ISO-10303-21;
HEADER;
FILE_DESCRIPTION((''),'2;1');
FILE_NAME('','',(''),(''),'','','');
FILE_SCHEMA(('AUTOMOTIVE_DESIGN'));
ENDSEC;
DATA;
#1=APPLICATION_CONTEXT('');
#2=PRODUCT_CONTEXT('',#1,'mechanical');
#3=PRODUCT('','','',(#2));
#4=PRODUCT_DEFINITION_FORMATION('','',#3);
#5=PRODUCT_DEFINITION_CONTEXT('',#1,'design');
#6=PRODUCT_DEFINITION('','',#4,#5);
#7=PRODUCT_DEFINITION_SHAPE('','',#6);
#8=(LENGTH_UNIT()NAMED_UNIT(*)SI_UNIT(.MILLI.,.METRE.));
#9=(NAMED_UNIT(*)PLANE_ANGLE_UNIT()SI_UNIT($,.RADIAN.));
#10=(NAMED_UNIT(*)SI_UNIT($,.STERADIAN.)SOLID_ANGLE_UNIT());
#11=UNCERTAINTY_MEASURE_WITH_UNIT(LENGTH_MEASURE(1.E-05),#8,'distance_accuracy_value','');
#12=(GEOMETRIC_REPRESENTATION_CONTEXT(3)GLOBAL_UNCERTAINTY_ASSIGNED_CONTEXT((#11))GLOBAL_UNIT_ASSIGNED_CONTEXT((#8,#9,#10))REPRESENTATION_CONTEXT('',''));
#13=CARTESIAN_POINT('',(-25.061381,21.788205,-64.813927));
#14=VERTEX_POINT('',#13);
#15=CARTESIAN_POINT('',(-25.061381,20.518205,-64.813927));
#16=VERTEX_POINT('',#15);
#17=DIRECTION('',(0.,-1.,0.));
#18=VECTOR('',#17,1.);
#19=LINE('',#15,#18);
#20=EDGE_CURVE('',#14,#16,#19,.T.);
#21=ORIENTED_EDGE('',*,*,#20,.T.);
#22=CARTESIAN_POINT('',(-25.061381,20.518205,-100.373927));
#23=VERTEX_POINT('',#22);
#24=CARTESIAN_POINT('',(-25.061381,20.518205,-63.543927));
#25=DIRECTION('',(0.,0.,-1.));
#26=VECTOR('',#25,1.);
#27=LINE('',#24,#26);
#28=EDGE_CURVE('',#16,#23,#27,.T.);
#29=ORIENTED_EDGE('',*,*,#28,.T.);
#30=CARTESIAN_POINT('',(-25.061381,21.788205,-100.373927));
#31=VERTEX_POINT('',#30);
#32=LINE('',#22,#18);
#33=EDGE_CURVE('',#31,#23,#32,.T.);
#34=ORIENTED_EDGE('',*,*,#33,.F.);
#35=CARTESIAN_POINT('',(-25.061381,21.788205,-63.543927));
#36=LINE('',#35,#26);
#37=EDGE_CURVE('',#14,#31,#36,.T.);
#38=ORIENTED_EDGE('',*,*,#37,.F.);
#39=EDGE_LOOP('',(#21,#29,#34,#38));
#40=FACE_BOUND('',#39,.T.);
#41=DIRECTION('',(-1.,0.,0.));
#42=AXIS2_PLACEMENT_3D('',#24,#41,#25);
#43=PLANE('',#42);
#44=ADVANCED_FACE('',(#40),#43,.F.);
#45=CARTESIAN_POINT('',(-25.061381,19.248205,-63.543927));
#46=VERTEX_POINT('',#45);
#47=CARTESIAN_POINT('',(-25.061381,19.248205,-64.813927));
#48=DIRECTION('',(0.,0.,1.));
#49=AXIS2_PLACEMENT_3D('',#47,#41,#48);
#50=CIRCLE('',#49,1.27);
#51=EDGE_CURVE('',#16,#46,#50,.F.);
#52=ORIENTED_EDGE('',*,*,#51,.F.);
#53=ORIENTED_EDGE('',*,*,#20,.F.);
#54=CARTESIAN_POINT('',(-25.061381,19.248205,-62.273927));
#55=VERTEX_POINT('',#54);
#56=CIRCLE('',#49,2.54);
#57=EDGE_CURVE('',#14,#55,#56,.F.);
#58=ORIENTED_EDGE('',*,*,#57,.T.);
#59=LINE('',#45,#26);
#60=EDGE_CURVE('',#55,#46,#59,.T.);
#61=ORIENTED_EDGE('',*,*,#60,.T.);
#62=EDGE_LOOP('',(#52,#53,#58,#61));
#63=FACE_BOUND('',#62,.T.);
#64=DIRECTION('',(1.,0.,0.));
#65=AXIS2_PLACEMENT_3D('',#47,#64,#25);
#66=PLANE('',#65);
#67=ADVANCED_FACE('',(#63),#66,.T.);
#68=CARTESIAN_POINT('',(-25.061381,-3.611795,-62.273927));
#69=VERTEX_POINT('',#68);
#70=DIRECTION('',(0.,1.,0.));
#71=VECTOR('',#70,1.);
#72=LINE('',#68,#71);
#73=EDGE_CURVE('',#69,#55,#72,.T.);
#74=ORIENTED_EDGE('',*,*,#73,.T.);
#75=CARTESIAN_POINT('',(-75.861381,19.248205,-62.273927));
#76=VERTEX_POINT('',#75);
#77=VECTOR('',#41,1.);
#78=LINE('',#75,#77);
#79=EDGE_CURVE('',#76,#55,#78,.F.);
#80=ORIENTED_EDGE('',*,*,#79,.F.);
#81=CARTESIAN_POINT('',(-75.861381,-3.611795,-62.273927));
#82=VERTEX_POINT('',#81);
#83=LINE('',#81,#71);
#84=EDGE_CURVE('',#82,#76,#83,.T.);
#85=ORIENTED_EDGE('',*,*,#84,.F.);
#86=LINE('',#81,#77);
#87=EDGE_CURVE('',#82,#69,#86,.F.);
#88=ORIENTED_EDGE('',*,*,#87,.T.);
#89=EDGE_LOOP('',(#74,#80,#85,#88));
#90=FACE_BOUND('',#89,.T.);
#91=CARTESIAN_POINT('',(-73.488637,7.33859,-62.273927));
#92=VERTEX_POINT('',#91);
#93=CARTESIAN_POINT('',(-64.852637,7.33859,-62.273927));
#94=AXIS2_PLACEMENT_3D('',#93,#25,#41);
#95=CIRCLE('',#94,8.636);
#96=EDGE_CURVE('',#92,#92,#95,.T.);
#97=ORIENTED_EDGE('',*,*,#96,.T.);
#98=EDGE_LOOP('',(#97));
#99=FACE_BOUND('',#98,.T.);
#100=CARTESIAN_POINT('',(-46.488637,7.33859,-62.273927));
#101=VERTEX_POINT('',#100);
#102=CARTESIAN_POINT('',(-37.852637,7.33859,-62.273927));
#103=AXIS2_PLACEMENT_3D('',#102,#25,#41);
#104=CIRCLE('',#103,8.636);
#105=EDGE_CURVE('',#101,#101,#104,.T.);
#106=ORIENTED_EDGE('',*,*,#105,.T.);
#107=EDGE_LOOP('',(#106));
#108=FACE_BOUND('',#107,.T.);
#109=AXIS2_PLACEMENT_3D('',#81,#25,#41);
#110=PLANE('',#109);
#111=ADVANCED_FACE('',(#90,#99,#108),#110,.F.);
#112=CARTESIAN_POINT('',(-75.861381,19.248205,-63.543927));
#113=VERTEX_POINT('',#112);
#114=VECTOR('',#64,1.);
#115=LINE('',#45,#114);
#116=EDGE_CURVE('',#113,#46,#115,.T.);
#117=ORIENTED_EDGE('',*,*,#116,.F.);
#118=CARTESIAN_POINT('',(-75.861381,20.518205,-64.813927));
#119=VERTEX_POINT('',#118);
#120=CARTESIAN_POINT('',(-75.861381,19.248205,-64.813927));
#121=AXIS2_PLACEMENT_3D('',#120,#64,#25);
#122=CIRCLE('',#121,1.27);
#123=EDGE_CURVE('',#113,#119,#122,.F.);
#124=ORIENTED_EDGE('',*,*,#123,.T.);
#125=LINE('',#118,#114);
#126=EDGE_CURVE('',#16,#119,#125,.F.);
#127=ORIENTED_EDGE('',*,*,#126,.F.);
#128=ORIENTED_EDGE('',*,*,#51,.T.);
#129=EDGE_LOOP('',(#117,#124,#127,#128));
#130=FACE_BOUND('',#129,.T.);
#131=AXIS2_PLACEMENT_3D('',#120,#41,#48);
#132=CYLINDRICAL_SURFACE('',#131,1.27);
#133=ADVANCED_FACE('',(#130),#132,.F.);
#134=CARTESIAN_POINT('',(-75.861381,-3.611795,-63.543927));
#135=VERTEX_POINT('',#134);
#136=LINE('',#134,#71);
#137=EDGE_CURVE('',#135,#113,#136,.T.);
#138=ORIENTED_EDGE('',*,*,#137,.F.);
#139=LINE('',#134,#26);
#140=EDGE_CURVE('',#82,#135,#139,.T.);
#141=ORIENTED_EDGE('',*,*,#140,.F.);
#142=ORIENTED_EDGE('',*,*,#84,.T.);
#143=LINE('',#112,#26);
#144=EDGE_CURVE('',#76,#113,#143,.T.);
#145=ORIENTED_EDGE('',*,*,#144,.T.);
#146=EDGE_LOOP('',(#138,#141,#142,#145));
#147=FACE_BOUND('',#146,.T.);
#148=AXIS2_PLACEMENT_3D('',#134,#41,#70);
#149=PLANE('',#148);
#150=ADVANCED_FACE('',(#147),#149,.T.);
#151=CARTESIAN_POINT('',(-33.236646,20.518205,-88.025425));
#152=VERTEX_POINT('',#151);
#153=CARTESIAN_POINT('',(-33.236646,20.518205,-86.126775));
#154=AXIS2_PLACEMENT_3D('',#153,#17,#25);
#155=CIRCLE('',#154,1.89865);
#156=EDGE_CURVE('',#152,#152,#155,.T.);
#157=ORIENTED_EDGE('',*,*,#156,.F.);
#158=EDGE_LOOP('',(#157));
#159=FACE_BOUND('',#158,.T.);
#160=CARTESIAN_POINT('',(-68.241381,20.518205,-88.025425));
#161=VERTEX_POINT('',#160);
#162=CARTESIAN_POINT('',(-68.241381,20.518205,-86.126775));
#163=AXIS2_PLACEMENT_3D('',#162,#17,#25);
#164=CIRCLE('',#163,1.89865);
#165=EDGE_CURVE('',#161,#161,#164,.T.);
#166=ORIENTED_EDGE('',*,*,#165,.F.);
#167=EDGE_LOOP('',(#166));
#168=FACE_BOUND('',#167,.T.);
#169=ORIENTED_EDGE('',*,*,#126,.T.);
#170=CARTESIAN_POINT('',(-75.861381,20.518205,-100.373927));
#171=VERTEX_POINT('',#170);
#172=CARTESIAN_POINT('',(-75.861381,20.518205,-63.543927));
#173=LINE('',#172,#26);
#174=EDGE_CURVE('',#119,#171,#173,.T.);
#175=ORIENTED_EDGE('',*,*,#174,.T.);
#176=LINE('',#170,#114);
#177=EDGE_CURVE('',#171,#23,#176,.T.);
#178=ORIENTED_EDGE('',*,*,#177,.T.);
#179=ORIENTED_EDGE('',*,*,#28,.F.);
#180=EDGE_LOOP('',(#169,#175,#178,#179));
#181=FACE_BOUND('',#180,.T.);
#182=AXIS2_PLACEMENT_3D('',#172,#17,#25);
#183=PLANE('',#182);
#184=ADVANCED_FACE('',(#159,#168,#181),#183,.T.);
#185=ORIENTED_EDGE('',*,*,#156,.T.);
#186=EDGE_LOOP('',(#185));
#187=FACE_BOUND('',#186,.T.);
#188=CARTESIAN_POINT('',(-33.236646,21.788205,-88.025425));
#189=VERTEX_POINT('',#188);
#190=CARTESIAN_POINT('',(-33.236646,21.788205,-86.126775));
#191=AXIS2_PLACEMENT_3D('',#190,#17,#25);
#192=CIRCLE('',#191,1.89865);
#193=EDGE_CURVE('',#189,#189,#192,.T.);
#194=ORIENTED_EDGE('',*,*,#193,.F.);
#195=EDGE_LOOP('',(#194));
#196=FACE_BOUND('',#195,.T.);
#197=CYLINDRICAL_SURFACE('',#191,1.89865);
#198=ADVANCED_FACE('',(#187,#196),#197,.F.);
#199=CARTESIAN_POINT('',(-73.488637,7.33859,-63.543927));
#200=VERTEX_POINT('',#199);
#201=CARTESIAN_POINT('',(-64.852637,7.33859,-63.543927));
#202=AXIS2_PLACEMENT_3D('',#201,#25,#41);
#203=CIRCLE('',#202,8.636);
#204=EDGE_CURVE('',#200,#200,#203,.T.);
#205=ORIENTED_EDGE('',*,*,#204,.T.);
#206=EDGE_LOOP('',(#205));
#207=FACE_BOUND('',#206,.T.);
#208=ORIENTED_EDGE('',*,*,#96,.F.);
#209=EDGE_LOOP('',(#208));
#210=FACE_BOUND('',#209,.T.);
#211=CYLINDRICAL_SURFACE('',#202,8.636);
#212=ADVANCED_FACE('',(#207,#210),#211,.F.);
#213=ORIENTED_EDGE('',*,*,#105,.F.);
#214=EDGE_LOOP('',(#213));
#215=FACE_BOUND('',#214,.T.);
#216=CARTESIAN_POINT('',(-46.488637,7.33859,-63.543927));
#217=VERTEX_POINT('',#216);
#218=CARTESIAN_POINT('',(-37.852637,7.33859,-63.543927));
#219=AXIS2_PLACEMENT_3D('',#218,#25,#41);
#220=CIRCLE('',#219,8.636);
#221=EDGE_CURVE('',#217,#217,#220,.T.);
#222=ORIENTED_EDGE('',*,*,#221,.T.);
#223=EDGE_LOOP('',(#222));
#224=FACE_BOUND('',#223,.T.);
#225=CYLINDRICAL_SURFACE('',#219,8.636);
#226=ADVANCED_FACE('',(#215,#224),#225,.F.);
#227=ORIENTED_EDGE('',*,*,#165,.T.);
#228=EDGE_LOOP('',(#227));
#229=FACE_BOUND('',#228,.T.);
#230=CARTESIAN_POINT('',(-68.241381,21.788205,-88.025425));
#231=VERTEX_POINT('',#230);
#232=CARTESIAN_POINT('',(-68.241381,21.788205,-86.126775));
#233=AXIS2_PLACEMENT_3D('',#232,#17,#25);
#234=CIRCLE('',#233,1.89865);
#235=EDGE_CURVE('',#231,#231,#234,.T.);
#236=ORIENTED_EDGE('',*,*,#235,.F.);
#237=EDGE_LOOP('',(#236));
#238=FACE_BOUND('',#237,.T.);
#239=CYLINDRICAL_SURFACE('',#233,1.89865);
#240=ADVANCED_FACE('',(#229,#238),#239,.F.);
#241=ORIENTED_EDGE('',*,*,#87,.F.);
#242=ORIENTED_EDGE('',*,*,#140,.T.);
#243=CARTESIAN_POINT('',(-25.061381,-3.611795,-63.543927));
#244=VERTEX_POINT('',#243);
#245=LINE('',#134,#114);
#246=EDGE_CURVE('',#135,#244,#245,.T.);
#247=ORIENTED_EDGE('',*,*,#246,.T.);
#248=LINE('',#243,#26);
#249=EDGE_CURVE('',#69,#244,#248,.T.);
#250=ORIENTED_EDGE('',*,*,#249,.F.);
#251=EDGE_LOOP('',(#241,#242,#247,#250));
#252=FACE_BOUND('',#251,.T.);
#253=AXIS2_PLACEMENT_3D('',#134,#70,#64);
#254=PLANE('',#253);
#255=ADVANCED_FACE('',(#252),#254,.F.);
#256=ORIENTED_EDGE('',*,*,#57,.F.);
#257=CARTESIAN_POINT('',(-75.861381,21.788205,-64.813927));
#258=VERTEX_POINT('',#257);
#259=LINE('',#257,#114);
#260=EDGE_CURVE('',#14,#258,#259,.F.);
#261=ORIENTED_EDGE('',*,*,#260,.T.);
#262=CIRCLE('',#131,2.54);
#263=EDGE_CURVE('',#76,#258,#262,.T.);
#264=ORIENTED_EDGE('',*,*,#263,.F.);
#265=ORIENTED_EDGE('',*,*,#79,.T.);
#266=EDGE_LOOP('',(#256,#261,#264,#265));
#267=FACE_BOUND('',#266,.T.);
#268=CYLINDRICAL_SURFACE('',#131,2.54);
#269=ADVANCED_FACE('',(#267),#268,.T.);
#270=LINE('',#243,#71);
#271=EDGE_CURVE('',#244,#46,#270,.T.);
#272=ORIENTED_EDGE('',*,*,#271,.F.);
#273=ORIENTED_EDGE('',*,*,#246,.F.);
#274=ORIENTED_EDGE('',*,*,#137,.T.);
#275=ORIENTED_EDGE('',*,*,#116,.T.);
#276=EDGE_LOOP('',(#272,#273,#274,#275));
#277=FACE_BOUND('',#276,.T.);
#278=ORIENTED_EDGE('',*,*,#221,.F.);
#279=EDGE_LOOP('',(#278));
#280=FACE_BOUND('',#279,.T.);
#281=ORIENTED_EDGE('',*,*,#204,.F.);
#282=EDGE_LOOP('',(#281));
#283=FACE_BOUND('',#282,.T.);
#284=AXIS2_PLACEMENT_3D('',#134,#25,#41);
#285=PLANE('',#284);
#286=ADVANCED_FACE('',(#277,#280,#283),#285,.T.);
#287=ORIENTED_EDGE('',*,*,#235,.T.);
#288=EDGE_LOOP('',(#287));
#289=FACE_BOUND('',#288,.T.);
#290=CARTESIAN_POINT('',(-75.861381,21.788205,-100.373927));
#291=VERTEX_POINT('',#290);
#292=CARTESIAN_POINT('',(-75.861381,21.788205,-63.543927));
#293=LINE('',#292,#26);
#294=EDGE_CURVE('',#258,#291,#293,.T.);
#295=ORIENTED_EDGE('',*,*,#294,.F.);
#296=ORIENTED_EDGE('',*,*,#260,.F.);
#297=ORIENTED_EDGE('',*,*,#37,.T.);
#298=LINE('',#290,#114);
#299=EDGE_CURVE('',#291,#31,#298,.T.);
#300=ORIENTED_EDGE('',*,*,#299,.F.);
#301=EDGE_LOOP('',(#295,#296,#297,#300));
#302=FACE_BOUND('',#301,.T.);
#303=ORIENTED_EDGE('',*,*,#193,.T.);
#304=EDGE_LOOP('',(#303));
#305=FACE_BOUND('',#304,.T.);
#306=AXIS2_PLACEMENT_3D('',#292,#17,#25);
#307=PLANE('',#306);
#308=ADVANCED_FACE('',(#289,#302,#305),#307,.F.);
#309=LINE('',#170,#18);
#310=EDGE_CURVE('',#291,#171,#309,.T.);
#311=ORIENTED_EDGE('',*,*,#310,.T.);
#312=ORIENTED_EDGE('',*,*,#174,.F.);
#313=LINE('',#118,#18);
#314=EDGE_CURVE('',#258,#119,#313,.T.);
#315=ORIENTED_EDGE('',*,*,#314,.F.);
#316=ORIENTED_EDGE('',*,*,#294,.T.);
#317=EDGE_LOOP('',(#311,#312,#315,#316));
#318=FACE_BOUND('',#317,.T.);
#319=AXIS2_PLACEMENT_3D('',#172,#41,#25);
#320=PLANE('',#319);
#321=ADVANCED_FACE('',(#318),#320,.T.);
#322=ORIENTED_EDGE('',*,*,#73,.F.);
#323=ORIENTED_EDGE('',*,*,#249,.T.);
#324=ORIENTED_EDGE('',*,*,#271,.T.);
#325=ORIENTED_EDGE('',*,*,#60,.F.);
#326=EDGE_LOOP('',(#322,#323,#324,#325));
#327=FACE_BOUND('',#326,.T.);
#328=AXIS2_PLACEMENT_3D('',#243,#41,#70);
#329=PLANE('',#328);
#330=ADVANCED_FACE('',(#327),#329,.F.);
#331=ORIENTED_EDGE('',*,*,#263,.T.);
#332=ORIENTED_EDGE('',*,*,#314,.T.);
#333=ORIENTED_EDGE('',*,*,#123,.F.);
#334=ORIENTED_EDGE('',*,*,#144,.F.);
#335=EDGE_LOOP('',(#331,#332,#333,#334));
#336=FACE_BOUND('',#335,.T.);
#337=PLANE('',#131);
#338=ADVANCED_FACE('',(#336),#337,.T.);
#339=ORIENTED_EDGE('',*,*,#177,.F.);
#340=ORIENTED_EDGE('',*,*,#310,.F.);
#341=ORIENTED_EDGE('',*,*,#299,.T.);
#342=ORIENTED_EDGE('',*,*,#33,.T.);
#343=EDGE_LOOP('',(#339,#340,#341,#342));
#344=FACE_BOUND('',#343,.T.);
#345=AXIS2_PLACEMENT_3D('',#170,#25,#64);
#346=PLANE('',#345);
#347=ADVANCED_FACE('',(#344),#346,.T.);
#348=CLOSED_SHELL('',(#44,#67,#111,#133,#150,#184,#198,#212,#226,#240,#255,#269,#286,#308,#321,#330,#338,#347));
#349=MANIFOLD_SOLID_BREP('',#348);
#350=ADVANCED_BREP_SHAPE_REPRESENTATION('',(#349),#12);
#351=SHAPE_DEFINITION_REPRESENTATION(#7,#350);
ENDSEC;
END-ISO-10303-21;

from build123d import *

# Parameters (mm, degrees)
BOSS_EXTRUDE1_DEPTH    = 50.8
SKETCH2_R              = 8.636
CUT_EXTRUDE1_DEPTH     = 88.642940525
CONVERT_SOLID1_START   = -75.861380996
CONVERT_SOLID1_DEPTH   = 50.8
CONVERT_SOLID1_2_DEPTH = 50.8
SKETCH7_R              = 1.89865
CUT_EXTRUDE2_DEPTH     = 129.109840672


# Read off the part's stored shape, not the designer's step: Convert-Solid1
with BuildPart() as part:
    # Sketch1 → Boss-Extrude1 (new body)
    with BuildSketch(Plane(origin=(-25.061380996, 0, 0), x_dir=(0, 0, -1), z_dir=(1, 0, 0))):
        Polygon((63.543927145, -3.611794537), (63.543927145, 20.518205463), (100.373927145, 20.518205463), (100.373927145, 21.788205463), (62.273927145, 21.788205463), (62.273927145, -3.611794537), align=None)
    extrude(amount=-BOSS_EXTRUDE1_DEPTH)

    # Sketch2 → Cut-Extrude1 (cut, through all)
    with BuildSketch(Plane.XY.offset(-62.273927145)):
        with Locations((-64.852637296, 7.338590118)):
            Circle(SKETCH2_R)
        with Locations((-37.852637296, 7.338590118)):
            Circle(SKETCH2_R)
    extrude(amount=-CUT_EXTRUDE1_DEPTH, mode=Mode.SUBTRACT)

    # Convert-Solid1 outline → Convert-Solid1 (cut)
    with BuildSketch(Plane.YZ.offset(CONVERT_SOLID1_START)):
        with BuildLine():
            Line((21.788205463, -62.273927145), (19.248205463, -62.273927145))
            ThreePointArc((19.248205463, -62.273927145), (21.044256687, -63.01787592), (21.788205463, -64.813927145))
            Line((21.788205463, -64.813927145), (21.788205463, -62.273927145))
        make_face()
    extrude(amount=CONVERT_SOLID1_DEPTH, mode=Mode.SUBTRACT)

    # Convert-Solid1 2 outline → Convert-Solid1 2 (add)
    with BuildSketch(Plane.YZ.offset(CONVERT_SOLID1_START)):
        with BuildLine():
            Line((20.518205463, -63.543927145), (19.248205463, -63.543927145))
            ThreePointArc((19.248205463, -63.543927145), (20.146231075, -63.915901533), (20.518205463, -64.813927145))
            Line((20.518205463, -64.813927145), (20.518205463, -63.543927145))
        make_face()
    extrude(amount=CONVERT_SOLID1_2_DEPTH)

    # Sketch7 → Cut-Extrude2 (cut, through all)
    with BuildSketch(Plane(origin=(0, 20.518205463, 0), x_dir=(-1, 0, 0), z_dir=(0, -1, 0))):
        with Locations(Location((68.241380996, 86.126775189, 0), (0, 0, 90))):
            Circle(SKETCH7_R)
        with Locations(Location((33.236646392, 86.126775189, 0), (0, 0, 90))):
            Circle(SKETCH7_R)
    extrude(amount=-CUT_EXTRUDE2_DEPTH, mode=Mode.SUBTRACT)


solid = part.part
